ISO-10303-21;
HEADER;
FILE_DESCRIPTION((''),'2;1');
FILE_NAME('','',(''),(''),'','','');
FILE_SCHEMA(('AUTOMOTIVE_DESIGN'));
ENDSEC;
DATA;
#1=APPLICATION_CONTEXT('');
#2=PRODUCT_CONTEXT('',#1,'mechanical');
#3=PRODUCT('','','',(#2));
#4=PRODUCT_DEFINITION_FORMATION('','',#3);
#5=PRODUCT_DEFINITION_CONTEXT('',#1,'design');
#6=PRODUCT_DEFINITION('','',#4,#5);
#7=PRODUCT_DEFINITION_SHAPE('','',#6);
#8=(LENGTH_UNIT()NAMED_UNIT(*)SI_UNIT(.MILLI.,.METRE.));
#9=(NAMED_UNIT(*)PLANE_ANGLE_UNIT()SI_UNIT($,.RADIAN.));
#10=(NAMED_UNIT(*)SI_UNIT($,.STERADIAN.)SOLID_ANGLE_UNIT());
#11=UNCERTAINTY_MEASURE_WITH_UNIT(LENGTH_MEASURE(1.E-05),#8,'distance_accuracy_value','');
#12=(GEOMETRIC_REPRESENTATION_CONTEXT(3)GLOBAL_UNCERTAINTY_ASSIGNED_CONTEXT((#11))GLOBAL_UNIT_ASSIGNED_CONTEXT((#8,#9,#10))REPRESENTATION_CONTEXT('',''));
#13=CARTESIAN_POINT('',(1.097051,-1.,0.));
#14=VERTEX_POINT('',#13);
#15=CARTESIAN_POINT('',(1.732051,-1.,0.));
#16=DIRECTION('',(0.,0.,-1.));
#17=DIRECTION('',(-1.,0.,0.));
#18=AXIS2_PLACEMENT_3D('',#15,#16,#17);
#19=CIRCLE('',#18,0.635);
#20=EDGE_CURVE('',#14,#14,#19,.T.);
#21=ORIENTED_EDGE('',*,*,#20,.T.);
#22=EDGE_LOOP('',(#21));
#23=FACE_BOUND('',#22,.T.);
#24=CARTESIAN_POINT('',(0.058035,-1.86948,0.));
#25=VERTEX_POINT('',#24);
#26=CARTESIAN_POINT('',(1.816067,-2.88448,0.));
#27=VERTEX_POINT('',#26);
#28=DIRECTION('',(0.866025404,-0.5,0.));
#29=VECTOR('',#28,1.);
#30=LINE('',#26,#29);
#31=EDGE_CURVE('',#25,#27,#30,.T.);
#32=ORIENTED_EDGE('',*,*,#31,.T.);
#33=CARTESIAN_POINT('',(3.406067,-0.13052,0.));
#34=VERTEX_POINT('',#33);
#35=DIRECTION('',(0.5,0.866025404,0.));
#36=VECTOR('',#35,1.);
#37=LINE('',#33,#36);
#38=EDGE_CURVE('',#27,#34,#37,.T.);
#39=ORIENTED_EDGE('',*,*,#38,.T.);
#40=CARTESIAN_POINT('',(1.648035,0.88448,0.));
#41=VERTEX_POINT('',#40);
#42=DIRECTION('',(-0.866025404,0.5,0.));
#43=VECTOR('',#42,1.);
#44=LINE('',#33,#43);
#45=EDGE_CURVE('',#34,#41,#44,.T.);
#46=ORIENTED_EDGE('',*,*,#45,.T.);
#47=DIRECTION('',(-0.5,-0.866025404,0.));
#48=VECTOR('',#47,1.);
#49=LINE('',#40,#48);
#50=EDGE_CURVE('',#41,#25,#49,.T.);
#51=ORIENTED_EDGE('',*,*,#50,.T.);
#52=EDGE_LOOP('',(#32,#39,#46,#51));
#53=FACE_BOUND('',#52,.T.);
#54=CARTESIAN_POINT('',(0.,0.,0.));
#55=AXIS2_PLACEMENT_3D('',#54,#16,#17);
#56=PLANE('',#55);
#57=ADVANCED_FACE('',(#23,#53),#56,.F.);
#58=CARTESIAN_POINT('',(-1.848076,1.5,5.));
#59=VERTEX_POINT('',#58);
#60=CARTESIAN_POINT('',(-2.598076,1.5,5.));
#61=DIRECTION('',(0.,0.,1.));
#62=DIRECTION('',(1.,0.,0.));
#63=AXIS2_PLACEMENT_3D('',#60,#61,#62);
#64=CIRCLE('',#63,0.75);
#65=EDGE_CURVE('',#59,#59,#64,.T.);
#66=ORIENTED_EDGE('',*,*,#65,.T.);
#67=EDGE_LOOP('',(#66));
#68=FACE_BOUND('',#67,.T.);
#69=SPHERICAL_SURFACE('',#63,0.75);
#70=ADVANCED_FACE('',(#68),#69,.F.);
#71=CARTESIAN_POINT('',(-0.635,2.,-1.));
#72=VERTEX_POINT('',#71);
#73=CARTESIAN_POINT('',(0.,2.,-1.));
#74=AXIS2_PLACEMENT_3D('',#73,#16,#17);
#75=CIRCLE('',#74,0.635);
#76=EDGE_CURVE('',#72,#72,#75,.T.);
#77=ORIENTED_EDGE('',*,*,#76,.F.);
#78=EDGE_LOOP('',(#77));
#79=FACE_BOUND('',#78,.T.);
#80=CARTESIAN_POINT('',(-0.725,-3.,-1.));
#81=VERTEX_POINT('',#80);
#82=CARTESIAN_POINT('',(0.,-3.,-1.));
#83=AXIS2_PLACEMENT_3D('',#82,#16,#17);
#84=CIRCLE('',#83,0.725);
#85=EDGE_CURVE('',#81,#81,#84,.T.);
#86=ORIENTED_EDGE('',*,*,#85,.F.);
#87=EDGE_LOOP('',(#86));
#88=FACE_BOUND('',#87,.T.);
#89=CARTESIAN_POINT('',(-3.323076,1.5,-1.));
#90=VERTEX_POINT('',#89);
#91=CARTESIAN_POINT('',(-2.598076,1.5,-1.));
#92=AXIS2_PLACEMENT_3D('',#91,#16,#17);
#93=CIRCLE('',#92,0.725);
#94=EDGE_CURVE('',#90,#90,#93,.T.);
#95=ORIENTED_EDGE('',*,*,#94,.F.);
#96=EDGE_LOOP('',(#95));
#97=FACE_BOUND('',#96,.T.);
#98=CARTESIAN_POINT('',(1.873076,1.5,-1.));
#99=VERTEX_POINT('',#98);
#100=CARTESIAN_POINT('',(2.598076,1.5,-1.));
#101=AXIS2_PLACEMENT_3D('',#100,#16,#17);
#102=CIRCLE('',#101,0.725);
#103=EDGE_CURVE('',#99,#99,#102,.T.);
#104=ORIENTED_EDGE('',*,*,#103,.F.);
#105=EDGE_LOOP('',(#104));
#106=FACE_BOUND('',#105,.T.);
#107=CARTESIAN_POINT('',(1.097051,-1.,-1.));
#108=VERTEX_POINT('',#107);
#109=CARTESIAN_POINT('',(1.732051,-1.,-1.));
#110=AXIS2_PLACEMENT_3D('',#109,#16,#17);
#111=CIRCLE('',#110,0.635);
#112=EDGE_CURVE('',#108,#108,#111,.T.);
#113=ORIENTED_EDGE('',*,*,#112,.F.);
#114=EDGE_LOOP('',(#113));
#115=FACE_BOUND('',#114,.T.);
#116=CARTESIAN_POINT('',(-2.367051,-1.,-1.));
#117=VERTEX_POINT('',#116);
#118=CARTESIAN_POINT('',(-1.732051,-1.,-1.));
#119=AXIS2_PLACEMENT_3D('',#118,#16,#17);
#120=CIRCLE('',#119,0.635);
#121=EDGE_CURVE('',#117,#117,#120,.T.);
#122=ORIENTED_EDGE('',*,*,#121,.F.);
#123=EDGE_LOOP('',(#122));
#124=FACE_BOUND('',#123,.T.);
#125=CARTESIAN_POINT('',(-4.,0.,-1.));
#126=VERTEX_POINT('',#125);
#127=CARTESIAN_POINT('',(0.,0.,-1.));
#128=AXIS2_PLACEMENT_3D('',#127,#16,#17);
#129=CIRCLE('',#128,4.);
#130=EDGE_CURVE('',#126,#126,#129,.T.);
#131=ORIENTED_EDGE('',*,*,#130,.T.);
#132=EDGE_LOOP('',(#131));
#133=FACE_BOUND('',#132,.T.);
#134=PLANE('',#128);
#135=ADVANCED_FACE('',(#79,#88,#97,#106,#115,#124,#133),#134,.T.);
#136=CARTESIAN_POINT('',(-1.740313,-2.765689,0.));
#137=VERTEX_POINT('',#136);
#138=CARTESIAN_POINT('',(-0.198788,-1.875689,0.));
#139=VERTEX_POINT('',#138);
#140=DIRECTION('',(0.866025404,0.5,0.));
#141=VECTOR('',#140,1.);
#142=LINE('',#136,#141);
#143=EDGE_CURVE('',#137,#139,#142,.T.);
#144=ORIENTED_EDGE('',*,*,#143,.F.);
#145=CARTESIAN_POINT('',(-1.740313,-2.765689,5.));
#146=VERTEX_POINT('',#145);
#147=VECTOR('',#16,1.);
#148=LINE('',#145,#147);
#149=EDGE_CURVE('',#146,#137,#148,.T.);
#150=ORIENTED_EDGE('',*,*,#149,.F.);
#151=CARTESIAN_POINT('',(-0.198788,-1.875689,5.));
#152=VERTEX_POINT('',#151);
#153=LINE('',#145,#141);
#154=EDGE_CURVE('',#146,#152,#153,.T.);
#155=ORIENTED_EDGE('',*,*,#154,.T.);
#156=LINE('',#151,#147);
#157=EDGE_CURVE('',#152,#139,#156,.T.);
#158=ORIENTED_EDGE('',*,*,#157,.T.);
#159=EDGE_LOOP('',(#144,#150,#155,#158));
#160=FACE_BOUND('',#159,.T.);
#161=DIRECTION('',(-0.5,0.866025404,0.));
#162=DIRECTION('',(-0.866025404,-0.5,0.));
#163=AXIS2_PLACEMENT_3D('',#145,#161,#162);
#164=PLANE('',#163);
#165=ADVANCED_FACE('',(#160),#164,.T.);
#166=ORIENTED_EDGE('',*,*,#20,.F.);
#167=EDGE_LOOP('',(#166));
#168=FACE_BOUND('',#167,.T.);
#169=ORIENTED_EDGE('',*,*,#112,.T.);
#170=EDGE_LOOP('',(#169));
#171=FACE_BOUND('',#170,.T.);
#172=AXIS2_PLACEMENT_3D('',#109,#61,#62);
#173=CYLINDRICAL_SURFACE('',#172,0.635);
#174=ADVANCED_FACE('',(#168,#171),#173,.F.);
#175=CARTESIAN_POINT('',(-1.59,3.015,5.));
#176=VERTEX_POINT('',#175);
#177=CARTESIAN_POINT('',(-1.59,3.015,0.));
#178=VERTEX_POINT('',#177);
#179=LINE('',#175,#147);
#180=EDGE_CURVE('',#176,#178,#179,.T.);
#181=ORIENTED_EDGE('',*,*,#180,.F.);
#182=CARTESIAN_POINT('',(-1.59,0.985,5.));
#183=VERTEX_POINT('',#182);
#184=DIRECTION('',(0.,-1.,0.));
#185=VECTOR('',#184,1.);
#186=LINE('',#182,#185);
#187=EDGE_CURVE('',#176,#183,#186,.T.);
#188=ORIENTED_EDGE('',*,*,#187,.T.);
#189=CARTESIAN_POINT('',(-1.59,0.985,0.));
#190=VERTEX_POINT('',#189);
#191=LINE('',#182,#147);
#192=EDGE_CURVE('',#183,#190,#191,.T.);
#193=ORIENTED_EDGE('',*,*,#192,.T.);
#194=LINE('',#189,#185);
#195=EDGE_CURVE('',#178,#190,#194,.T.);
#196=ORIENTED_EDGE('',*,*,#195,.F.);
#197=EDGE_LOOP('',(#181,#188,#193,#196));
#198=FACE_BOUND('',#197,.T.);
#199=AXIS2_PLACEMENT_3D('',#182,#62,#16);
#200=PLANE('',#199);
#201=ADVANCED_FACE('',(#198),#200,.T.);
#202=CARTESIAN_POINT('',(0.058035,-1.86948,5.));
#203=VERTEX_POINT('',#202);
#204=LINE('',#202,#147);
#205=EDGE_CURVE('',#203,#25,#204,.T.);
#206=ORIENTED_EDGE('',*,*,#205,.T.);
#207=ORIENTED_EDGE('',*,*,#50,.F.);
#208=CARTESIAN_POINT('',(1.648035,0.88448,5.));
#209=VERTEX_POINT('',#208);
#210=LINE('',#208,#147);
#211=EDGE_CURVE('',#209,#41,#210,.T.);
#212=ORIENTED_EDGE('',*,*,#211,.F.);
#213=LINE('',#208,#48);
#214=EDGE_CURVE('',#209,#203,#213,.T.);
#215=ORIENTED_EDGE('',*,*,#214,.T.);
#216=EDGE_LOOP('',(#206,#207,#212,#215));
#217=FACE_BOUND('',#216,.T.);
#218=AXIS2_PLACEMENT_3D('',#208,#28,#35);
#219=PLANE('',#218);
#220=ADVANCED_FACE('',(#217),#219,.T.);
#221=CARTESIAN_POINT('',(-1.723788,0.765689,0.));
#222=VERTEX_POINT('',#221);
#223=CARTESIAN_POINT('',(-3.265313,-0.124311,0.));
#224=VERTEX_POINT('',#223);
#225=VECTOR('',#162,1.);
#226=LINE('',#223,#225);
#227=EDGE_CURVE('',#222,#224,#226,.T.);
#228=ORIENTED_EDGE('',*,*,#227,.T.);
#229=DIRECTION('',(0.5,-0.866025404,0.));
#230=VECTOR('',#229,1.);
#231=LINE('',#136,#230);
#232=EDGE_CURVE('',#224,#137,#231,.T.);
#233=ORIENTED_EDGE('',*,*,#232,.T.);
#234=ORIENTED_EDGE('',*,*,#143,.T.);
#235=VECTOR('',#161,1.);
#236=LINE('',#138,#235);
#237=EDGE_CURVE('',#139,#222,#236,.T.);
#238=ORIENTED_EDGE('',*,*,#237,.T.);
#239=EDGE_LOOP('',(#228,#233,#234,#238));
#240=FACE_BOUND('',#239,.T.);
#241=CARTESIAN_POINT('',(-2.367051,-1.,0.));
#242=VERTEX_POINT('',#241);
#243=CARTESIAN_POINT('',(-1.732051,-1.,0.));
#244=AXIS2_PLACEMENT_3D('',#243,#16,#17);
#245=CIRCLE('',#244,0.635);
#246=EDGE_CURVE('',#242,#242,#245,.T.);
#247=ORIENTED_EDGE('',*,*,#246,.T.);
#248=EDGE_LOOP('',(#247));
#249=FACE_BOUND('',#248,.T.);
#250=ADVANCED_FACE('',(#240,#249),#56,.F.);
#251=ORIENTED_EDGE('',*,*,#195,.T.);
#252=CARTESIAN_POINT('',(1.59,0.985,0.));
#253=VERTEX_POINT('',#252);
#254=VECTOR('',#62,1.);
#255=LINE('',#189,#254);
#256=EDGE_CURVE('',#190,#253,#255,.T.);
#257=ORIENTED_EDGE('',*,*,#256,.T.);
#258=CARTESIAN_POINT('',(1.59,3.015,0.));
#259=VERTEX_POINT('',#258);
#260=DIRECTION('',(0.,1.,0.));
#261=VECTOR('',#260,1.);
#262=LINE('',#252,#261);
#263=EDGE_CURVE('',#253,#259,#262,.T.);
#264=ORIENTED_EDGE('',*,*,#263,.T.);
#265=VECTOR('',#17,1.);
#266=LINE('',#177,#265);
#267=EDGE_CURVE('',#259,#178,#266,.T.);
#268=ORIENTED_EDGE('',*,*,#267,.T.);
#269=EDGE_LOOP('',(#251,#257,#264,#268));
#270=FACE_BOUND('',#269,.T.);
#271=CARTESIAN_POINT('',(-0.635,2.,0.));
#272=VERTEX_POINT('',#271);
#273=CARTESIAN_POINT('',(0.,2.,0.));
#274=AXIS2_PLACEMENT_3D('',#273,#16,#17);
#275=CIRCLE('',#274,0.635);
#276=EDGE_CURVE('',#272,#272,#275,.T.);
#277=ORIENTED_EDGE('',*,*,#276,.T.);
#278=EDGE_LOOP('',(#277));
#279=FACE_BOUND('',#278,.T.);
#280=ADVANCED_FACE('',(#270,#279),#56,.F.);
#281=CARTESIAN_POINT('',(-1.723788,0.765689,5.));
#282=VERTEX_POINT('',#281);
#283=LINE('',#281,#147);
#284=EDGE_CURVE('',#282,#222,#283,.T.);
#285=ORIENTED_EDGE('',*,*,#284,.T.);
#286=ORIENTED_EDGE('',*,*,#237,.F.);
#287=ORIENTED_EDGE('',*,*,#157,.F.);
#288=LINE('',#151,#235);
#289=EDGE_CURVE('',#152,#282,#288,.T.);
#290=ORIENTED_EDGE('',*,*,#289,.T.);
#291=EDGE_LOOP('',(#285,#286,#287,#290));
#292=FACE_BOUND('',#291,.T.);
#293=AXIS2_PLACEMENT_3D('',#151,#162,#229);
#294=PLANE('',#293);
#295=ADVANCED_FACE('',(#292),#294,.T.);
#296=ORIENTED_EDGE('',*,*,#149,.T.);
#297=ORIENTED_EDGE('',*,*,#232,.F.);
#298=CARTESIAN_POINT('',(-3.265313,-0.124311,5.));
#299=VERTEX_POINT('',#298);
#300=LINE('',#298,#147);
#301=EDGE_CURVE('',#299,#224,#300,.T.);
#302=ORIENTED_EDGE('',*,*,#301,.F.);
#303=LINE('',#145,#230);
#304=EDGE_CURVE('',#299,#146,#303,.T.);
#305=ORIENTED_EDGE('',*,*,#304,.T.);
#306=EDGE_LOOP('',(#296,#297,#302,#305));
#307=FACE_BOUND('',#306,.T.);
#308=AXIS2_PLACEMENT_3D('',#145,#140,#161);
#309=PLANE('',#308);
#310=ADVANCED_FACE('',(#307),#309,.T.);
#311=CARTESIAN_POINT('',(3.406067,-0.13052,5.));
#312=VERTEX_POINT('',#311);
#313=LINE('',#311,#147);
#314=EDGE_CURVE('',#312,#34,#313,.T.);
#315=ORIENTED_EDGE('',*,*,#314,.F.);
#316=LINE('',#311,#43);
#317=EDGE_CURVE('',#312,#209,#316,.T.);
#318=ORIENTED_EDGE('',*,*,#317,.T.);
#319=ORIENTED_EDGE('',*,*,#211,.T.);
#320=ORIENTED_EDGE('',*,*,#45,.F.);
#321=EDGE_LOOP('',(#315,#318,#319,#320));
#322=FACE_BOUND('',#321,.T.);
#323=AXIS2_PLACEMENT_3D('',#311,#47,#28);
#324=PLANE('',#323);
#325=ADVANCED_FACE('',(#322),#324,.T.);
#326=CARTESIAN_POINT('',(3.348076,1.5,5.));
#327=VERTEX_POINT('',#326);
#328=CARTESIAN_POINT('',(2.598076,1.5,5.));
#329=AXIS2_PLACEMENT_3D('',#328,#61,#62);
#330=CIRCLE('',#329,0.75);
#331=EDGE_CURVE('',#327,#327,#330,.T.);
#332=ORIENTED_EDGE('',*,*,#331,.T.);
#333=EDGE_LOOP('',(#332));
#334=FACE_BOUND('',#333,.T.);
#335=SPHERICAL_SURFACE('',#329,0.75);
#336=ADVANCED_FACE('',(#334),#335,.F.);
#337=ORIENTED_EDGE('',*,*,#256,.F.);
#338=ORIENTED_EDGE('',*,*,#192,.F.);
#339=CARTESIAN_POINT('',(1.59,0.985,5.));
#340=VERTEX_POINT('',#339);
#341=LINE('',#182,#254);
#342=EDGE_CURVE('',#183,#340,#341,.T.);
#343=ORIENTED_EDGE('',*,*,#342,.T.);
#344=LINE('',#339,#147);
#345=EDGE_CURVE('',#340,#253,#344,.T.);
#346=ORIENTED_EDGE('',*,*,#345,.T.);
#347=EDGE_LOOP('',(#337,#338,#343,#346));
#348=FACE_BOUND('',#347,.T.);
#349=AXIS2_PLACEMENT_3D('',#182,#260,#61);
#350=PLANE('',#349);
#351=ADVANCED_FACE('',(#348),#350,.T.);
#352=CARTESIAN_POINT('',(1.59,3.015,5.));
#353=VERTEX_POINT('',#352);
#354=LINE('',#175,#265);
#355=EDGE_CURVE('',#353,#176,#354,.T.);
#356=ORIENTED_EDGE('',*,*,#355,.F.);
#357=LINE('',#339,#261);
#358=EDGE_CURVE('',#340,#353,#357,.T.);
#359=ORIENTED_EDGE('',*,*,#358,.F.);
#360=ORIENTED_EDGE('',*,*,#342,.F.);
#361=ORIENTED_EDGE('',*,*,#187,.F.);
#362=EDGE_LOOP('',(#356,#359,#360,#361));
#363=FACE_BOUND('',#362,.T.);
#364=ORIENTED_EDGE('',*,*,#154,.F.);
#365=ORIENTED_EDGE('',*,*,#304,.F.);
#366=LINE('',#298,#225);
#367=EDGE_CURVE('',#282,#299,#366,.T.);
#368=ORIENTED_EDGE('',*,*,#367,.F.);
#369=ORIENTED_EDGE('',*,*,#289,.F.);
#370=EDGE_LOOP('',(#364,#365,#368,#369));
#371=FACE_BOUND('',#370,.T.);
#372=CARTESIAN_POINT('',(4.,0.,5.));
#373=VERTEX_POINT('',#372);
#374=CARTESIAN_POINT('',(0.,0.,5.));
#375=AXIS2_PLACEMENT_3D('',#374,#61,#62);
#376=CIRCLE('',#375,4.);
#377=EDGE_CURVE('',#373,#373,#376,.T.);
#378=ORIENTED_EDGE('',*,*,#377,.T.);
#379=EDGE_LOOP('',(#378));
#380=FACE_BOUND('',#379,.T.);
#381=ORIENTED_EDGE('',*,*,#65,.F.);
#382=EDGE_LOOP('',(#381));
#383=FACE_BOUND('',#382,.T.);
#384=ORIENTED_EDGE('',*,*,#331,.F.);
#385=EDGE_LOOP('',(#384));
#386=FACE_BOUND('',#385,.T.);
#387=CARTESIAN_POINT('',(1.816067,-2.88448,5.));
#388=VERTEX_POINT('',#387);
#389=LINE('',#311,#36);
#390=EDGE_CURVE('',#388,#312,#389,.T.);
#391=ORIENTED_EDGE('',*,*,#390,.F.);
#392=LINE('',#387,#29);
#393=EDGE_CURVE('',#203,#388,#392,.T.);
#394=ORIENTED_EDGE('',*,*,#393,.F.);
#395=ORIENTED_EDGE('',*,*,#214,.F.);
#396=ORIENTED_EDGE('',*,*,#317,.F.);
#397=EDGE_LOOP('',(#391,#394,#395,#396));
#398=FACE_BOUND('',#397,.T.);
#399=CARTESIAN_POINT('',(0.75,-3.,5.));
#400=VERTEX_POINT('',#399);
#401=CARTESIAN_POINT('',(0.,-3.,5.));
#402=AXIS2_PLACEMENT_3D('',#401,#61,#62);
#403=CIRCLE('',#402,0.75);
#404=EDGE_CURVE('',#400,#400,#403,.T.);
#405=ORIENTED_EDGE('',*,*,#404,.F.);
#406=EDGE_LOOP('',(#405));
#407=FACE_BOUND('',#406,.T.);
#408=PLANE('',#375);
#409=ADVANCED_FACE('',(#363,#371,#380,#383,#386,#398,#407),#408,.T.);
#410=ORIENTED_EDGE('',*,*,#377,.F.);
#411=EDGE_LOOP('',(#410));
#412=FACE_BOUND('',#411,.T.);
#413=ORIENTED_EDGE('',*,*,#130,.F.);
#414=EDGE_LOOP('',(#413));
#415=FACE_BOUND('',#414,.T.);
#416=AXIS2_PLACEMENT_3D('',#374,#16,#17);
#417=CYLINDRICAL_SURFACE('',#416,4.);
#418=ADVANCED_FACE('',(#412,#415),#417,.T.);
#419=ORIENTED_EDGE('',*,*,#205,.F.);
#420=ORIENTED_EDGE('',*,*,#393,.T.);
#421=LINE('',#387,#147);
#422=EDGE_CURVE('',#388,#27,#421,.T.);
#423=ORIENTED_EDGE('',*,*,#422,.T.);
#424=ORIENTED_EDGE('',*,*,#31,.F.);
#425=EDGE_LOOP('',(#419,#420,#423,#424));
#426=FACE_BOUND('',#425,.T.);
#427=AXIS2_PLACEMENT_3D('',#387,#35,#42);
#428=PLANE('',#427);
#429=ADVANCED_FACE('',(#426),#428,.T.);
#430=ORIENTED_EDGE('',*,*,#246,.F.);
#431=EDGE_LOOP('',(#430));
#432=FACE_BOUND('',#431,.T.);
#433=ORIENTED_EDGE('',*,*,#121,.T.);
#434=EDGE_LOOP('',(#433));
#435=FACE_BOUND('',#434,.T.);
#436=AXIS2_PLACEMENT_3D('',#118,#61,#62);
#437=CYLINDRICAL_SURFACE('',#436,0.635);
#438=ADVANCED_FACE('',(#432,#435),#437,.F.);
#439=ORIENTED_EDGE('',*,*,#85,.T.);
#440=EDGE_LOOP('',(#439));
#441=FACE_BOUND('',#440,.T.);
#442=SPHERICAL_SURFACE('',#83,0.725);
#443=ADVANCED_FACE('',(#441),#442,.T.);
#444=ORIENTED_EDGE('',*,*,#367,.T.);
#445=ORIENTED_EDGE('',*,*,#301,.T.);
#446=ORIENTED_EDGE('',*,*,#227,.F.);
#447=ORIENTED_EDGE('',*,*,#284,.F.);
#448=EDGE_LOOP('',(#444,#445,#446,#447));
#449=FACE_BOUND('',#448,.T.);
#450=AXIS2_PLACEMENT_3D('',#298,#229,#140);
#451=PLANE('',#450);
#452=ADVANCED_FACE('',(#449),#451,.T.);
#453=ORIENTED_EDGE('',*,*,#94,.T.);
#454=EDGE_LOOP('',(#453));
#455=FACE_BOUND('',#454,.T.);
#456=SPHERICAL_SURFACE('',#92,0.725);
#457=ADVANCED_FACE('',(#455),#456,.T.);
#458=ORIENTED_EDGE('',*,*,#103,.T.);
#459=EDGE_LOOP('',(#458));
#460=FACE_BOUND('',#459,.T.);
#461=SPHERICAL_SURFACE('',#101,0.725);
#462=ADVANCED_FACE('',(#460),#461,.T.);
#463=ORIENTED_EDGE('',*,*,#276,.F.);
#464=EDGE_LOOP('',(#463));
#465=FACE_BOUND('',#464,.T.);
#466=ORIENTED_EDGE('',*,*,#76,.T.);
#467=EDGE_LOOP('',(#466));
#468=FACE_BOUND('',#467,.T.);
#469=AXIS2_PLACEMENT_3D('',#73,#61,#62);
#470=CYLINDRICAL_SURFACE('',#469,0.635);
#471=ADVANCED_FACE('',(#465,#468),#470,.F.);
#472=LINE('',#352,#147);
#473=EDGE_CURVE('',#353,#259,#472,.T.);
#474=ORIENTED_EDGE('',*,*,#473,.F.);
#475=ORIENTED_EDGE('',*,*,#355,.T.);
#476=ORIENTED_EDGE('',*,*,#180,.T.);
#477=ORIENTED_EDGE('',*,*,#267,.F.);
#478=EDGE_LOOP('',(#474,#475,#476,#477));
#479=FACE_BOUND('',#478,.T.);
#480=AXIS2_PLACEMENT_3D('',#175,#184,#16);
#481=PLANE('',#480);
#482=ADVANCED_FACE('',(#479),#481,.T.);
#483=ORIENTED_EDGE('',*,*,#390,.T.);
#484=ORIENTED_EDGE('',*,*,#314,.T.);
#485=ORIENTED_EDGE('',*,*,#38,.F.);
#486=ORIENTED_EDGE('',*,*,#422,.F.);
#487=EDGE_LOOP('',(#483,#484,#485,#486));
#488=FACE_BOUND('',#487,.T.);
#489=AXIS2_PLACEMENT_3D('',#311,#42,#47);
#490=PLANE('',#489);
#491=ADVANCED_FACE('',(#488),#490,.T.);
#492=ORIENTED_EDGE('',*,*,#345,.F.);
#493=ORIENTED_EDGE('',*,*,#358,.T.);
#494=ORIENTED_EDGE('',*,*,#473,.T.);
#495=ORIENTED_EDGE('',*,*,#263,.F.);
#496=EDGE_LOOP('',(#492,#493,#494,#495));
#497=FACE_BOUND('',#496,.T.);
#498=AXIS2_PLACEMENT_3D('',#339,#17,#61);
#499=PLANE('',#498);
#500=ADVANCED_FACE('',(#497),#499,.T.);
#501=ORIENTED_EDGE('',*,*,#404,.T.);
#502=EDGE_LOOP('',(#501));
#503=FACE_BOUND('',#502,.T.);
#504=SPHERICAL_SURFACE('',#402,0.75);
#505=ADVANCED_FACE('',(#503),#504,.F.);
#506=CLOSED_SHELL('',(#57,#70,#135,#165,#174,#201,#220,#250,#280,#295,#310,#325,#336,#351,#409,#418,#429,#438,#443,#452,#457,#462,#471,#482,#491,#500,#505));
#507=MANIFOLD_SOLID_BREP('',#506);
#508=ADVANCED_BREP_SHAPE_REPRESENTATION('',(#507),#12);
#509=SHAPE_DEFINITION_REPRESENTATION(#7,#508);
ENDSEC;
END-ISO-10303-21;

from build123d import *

# Parameters (mm, degrees)
SKETCH1_R           = 4
SKETCH1_W           = 3.18
SKETCH1_H           = 2.03
BOSS_EXTRUDE1_DEPTH = 5
BOSS_EXTRUDE3_START = 1
SKETCH4_R           = 4
SKETCH4_R_2         = 0.635
BOSS_EXTRUDE3_DEPTH = 1
SKETCH2_R           = 0.725
BOSS_EXTRUDE2_DEPTH = 0.725
FILLET2_R           = 0.725
SKETCH3_R           = 0.75
CUT_EXTRUDE2_DEPTH  = 0.75
FILLET3_R           = 0.75


with BuildPart() as part:
    # Sketch1 → Boss-Extrude1 (new body)
    with BuildSketch(Plane.XY):
        Circle(SKETCH1_R)
        Polygon((3.406066592, -0.130519608), (1.648035023, 0.884480392), (0.058035023, -1.869480392), (1.816066592, -2.884480392), align=None, mode=Mode.SUBTRACT)
        with Locations((0, 2)):
            Rectangle(SKETCH1_W, SKETCH1_H, mode=Mode.SUBTRACT)
        Polygon((-1.740313417, -2.765688741), (-0.198788198, -1.875688741), (-1.723788198, 0.765688741), (-3.265313417, -0.124311259), align=None, mode=Mode.SUBTRACT)
    extrude(amount=BOSS_EXTRUDE1_DEPTH)

    # Sketch4 → Boss-Extrude3 (add)
    with BuildSketch(Plane(origin=(0, 0, 0), x_dir=(-1, 0, 0), z_dir=(0, 0, -1)).offset(BOSS_EXTRUDE3_START)):
        Circle(SKETCH4_R)
        with Locations((0, 2)):
            Circle(SKETCH4_R_2, mode=Mode.SUBTRACT)
        with Locations((1.732050808, -1)):
            Circle(SKETCH4_R_2, mode=Mode.SUBTRACT)
        with Locations((-1.732050808, -1)):
            Circle(SKETCH4_R_2, mode=Mode.SUBTRACT)
    extrude(amount=-BOSS_EXTRUDE3_DEPTH)

    # Sketch2 → Boss-Extrude2 (add)
    with BuildSketch(Plane(origin=(0, 0, -1), x_dir=(-1, 0, 0), z_dir=(0, 0, -1))):
        with Locations((0, -3)):
            Circle(SKETCH2_R)
        with Locations((-2.598076211, 1.5)):
            Circle(SKETCH2_R)
        with Locations((2.598076211, 1.5)):
            Circle(SKETCH2_R)
    extrude(amount=BOSS_EXTRUDE2_DEPTH)

    # Fillet2
    fillet2_edges = [part.edges().sort_by_distance(p)[0] for p in [
        (0.725, -3, -1.725),
        (3.323076211, 1.5, -1.725),
        (-1.873076211, 1.5, -1.725),
    ]]
    fillet(fillet2_edges, radius=FILLET2_R - 0.0001)  # a hair under: the kernel refuses the full size

    # Sketch3 → Cut-Extrude2 (cut)
    with BuildSketch(Plane.XY.offset(5)):
        with Locations((0, -3)):
            Circle(SKETCH3_R)
        with Locations((-2.598076211, 1.5)):
            Circle(SKETCH3_R)
        with Locations((2.598076211, 1.5)):
            Circle(SKETCH3_R)
    extrude(amount=-CUT_EXTRUDE2_DEPTH, mode=Mode.SUBTRACT)

    # Fillet3
    fillet3_edges = [part.edges().sort_by_distance(p)[0] for p in [
        (-0.75, -3, 4.25),
        (-3.348076211, 1.5, 4.25),
        (1.848076211, 1.5, 4.25),
    ]]
    fillet(fillet3_edges, radius=FILLET3_R - 0.0001)  # a hair under: the kernel refuses the full size


solid = part.part
